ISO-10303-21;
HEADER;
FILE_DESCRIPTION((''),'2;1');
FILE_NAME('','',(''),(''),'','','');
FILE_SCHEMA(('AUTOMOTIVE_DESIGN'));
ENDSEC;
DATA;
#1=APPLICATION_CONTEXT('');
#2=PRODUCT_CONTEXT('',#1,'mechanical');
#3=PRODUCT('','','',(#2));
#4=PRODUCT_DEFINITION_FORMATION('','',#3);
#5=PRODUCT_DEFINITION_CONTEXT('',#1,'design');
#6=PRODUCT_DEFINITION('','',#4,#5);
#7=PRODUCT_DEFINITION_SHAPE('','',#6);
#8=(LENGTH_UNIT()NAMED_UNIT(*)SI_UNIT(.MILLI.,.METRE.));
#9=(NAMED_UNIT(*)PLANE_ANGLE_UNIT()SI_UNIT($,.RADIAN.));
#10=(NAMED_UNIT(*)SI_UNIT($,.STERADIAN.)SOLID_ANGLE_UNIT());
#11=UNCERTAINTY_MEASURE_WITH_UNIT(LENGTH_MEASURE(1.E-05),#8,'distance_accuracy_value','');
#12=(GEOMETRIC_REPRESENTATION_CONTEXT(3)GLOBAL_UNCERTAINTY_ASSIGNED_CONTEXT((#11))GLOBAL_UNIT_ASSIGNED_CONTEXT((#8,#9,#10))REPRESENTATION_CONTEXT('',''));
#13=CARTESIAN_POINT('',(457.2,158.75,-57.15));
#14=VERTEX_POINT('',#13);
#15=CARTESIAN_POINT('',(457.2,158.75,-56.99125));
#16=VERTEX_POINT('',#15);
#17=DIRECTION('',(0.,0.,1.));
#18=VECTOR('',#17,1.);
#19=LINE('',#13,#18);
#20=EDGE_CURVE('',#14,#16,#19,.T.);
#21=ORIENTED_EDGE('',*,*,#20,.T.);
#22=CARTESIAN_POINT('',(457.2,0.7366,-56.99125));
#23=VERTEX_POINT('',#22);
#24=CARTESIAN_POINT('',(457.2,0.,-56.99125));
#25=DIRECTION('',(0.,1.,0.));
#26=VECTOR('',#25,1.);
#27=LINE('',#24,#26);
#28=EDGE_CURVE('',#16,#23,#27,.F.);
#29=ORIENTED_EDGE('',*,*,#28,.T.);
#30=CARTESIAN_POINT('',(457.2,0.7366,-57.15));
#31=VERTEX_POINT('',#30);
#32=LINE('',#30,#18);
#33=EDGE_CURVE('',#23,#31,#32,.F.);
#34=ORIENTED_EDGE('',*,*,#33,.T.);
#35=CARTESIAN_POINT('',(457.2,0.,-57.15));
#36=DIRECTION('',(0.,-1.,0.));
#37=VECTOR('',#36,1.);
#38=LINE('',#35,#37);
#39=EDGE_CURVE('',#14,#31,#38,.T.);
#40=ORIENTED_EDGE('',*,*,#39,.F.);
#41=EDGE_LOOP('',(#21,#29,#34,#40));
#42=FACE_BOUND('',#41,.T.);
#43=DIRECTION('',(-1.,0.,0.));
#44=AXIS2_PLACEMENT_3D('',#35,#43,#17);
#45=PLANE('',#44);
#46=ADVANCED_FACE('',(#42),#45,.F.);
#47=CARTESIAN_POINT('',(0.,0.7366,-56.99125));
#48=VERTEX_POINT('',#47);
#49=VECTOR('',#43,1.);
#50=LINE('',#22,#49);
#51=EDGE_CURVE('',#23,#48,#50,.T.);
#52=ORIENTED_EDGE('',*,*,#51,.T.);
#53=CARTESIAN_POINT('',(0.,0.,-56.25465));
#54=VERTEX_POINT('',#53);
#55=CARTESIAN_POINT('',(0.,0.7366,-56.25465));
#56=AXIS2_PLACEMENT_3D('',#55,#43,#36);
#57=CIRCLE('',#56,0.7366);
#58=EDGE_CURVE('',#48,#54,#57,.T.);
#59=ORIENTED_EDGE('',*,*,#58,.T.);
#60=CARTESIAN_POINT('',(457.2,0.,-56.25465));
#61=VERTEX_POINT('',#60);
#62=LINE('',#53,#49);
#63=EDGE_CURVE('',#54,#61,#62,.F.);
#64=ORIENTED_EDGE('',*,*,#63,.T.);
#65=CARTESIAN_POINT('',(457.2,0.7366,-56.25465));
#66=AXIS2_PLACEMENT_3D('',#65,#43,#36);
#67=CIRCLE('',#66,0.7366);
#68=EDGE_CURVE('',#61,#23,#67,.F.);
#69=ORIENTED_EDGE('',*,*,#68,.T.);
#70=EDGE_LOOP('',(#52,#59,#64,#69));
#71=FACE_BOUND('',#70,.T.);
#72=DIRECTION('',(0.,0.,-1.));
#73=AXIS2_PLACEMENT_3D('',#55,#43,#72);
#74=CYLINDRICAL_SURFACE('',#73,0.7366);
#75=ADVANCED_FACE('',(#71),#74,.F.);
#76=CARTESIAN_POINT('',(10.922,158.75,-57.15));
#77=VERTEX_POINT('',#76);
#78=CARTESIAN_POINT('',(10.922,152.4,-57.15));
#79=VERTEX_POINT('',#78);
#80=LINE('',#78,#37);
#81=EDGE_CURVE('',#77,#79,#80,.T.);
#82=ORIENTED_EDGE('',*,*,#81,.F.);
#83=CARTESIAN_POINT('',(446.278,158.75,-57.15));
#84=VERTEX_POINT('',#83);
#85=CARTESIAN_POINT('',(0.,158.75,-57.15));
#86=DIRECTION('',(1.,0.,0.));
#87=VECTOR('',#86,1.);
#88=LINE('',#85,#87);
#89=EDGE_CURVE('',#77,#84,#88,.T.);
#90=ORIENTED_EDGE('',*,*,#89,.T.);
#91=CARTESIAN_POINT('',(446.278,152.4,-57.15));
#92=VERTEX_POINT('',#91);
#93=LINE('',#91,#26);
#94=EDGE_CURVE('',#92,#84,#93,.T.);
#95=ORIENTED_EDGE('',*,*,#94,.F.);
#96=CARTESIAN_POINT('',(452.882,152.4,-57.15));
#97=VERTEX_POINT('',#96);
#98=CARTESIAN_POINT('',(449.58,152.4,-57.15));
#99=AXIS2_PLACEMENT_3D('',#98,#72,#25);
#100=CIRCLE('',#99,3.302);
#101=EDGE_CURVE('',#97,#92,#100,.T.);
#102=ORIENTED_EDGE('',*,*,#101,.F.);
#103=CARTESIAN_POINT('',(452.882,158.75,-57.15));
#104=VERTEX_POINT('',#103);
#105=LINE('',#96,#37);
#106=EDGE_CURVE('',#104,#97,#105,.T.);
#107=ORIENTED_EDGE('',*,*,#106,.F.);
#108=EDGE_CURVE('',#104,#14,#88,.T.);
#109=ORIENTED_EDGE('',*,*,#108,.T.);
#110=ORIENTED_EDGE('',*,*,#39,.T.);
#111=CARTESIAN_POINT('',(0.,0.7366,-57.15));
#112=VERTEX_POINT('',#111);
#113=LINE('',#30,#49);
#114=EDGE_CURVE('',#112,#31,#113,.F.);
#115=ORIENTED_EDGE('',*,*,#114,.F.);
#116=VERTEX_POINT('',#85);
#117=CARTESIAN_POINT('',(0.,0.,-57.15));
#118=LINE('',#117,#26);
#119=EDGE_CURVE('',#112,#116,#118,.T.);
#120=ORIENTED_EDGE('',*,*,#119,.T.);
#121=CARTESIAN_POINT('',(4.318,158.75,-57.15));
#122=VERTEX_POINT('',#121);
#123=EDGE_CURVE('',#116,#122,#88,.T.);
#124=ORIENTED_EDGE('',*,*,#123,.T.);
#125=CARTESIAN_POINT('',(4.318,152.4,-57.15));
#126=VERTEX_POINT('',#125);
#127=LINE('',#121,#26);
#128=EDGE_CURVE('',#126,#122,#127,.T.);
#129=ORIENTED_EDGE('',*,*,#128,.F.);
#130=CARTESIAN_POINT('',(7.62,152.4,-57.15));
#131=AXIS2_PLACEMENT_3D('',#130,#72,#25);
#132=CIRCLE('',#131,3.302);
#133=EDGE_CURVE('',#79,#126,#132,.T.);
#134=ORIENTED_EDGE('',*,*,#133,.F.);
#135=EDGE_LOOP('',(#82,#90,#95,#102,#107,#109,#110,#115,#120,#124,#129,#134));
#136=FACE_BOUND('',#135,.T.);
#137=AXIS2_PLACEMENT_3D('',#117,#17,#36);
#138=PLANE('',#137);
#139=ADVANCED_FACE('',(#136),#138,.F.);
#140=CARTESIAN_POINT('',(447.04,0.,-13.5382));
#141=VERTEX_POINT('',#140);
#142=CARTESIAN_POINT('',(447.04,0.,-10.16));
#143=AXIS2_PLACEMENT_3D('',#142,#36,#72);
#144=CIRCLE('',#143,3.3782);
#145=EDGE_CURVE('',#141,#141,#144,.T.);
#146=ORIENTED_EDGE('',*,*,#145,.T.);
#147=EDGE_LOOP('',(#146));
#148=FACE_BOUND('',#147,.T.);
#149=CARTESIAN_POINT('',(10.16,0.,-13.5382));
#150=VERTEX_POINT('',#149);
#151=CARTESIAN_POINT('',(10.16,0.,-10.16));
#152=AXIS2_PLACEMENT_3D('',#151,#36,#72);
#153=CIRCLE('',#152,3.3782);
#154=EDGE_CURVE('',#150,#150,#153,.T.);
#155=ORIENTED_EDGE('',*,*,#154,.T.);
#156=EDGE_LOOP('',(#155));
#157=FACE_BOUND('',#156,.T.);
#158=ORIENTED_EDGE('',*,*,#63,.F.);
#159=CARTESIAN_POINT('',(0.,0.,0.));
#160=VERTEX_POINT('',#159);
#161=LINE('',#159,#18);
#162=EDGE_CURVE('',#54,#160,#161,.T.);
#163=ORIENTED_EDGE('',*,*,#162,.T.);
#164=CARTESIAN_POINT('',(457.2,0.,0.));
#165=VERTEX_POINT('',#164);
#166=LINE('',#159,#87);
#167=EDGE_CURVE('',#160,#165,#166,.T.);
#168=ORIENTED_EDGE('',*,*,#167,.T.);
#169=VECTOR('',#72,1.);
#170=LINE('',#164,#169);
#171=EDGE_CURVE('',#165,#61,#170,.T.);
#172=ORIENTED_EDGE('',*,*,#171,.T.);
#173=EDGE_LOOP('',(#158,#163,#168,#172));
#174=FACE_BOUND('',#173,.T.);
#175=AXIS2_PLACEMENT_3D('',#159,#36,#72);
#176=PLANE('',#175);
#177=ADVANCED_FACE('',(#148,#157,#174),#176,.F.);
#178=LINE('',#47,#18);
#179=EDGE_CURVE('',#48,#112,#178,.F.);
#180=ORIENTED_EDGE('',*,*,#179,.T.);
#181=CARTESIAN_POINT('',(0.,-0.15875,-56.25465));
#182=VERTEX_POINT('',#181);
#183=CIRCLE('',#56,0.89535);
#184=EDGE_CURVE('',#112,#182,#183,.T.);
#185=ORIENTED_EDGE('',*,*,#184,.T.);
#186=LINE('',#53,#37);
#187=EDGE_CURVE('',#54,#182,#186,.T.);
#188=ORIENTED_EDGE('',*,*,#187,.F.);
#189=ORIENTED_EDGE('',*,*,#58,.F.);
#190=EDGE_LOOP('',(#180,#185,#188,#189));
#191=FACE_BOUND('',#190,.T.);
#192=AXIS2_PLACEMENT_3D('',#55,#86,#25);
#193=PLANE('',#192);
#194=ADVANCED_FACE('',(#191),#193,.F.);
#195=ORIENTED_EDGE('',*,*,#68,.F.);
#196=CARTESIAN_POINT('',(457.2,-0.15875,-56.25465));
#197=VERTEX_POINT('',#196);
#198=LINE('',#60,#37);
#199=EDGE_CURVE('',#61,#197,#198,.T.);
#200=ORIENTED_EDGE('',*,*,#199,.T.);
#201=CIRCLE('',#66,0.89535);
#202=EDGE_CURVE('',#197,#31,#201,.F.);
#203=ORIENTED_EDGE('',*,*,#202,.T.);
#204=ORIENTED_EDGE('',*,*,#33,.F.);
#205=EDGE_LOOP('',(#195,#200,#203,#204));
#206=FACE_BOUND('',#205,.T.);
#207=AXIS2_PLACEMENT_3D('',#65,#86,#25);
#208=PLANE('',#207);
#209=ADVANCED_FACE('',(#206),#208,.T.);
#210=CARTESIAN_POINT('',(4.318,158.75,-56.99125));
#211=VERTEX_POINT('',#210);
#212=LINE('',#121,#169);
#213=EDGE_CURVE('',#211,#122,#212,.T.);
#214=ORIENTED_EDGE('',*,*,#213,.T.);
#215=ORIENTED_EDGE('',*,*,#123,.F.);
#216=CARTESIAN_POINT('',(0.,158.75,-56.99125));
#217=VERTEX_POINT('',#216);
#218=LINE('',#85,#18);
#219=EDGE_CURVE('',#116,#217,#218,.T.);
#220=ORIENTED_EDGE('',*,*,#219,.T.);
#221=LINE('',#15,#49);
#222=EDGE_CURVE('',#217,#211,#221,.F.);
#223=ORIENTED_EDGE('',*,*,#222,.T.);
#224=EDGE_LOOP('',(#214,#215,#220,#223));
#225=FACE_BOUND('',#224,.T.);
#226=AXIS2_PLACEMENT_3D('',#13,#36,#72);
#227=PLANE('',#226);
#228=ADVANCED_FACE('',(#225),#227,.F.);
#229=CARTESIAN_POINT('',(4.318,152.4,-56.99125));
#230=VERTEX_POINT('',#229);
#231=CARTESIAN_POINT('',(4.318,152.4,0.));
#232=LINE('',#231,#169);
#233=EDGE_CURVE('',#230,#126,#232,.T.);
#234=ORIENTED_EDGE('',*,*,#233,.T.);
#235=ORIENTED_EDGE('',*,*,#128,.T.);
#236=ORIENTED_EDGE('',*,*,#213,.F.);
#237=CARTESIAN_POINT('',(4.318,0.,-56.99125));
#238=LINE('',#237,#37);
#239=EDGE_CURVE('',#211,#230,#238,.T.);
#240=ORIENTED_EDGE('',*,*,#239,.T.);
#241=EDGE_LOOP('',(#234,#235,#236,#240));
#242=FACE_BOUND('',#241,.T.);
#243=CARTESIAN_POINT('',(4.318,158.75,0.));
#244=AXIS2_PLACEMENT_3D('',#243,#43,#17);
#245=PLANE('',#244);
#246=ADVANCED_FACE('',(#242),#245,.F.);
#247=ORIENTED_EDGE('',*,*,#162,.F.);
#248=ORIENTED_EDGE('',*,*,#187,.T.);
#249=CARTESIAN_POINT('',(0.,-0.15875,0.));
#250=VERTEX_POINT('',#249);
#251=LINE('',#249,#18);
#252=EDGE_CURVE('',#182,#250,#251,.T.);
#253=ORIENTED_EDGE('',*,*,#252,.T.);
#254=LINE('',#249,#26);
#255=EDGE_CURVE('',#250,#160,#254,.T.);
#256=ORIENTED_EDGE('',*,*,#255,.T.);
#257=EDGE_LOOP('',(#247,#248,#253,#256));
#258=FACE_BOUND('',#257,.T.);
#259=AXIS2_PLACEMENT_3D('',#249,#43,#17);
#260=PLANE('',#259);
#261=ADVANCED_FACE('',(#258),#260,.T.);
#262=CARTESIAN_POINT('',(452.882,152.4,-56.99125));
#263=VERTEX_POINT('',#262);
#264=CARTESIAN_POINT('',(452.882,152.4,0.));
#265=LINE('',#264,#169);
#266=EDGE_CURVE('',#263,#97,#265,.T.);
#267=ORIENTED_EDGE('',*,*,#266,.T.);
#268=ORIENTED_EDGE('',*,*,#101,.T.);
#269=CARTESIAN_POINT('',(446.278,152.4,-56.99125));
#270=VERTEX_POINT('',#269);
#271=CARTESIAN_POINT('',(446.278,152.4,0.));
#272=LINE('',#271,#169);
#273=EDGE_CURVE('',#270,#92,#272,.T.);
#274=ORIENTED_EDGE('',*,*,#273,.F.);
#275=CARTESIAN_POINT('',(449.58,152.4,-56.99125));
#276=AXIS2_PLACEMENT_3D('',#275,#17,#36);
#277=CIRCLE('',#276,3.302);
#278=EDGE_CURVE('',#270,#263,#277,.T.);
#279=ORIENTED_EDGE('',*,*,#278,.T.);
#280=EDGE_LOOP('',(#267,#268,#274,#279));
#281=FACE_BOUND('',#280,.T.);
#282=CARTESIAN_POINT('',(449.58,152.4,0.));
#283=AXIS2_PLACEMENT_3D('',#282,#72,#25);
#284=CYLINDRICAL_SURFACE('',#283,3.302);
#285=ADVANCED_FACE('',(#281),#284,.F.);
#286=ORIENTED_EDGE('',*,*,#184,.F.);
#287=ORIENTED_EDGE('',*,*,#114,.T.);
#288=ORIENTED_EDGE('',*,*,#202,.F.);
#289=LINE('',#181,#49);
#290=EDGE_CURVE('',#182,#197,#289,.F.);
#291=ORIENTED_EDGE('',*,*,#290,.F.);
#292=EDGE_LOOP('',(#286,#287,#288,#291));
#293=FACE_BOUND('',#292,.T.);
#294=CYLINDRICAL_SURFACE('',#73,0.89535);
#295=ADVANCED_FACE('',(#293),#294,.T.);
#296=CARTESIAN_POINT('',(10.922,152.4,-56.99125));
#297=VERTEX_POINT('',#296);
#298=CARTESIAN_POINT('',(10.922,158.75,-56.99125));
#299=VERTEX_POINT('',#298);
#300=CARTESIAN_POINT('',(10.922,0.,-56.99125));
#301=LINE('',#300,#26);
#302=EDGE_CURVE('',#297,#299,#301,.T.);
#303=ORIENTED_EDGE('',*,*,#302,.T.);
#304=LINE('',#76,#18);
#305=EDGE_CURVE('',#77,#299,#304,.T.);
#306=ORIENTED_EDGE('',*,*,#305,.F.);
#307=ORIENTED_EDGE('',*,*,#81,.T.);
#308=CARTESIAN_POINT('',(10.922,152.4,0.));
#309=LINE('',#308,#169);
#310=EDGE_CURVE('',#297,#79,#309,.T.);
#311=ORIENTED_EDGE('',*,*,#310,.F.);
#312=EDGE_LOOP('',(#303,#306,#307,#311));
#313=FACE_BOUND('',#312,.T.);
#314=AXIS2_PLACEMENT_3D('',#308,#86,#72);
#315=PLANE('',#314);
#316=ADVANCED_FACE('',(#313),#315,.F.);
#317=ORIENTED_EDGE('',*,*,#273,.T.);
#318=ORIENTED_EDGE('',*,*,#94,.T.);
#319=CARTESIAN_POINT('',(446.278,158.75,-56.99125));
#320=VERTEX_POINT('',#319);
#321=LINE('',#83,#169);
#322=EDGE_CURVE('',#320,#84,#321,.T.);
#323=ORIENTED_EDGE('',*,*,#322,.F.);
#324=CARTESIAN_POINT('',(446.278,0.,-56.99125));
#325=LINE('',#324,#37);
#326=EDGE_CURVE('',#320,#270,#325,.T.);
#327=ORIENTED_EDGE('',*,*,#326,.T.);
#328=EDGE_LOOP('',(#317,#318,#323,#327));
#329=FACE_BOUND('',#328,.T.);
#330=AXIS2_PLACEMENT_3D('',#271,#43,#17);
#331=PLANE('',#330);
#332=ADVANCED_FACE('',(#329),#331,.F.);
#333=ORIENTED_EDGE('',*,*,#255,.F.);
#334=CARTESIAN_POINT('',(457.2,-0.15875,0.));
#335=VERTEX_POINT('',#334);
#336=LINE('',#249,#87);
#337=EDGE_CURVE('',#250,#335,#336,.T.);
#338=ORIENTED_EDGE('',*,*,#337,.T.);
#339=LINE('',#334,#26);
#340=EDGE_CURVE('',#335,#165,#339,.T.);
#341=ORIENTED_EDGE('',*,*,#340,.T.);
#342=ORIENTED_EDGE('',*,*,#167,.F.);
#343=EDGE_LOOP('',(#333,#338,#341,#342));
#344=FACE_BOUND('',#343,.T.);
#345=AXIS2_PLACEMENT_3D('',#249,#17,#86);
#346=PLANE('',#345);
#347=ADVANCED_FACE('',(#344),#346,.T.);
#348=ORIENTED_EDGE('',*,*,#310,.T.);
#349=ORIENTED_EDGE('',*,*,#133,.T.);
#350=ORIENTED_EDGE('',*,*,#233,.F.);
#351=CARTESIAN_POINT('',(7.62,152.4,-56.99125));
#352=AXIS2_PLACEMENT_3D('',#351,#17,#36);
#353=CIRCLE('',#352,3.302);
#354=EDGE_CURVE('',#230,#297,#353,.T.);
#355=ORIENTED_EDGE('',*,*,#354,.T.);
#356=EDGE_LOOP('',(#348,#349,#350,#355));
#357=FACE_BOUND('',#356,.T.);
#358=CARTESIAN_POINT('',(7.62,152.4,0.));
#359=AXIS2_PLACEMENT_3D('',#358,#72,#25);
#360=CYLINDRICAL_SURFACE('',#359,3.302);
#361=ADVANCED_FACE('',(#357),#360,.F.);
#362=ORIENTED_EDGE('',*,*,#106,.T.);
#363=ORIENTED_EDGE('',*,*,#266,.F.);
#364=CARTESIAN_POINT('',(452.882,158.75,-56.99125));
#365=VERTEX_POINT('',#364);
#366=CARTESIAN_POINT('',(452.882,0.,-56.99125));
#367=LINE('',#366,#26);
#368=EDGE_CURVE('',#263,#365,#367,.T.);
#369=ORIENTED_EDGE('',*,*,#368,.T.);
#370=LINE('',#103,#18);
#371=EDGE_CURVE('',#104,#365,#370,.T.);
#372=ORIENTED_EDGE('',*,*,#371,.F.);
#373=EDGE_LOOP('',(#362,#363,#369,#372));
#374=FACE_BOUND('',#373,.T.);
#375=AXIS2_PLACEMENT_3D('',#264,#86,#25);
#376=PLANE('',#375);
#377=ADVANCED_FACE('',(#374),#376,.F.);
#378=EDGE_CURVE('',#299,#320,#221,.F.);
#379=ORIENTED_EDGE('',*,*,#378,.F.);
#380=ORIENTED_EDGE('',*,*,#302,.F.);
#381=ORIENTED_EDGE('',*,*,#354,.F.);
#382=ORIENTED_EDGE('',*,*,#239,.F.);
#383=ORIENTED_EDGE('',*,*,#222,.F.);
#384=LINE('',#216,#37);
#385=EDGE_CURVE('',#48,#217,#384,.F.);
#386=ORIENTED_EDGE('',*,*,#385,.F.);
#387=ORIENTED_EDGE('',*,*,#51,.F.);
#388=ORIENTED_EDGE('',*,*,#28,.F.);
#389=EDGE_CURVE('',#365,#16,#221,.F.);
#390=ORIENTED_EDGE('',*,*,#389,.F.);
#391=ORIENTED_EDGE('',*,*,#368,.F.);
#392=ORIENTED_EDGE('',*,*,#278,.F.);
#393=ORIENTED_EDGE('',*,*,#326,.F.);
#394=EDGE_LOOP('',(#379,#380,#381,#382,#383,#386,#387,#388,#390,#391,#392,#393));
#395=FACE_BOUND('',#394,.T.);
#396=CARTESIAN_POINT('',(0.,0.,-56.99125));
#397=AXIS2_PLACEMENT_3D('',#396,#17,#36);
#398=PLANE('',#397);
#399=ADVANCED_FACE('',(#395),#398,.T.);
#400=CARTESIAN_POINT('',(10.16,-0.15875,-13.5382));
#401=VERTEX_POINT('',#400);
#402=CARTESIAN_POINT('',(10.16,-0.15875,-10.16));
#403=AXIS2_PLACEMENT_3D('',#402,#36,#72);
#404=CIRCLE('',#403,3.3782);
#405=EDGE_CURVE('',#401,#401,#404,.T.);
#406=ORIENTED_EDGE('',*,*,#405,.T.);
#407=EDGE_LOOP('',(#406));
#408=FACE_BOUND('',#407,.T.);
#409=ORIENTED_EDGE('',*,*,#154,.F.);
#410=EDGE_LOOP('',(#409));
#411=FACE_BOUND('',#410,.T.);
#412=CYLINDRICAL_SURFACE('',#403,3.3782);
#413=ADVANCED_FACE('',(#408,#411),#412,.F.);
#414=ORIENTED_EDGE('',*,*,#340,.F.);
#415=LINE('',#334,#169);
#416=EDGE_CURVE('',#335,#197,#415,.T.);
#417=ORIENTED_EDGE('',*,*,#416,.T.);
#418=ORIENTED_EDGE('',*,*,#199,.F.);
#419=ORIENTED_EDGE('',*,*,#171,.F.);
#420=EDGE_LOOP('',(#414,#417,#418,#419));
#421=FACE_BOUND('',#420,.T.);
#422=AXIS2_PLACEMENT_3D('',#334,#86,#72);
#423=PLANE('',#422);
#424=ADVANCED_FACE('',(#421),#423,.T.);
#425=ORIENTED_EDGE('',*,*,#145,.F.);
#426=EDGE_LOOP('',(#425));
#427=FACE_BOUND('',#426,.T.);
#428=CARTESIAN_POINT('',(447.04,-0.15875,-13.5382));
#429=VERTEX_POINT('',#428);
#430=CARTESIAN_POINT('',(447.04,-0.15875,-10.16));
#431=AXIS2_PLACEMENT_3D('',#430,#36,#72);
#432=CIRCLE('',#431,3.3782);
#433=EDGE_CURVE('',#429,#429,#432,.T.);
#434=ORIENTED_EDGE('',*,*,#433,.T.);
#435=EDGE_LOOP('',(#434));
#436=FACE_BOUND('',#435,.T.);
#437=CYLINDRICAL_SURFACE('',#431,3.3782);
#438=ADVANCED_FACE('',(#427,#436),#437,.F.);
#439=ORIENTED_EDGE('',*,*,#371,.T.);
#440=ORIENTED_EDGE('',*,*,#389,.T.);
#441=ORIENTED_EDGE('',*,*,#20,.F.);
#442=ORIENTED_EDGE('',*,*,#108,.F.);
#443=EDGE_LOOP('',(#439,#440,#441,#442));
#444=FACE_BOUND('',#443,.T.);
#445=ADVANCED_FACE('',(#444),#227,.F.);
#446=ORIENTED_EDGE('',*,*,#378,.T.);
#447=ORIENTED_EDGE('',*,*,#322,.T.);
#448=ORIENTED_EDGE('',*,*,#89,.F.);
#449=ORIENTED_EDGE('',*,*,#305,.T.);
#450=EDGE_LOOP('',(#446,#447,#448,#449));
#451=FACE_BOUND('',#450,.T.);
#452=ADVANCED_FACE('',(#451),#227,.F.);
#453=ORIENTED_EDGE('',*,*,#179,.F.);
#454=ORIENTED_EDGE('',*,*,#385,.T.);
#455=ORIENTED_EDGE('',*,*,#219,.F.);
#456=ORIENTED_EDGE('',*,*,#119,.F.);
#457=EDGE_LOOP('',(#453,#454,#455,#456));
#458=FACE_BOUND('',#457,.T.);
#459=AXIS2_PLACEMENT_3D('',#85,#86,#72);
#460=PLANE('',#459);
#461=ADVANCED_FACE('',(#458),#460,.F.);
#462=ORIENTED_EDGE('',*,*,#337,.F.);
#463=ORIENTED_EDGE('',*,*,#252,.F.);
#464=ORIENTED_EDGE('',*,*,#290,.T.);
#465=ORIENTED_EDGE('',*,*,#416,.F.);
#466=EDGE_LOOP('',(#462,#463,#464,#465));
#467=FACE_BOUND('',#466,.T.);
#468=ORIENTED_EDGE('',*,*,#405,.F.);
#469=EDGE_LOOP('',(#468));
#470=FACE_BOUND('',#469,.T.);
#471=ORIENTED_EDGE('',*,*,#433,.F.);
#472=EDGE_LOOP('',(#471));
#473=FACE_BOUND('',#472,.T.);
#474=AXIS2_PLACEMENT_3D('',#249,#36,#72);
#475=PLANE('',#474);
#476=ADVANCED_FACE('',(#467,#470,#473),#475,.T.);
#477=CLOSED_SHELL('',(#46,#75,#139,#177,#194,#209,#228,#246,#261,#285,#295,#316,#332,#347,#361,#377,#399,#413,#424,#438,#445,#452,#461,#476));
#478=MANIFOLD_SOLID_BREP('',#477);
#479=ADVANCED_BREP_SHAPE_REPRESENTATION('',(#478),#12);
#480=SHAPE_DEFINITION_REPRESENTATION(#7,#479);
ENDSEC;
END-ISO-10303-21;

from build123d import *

# Parameters (mm, degrees)
SKETCH1_W                    = 457.2
SKETCH1_H                    = 57.15
BASE_FLANGE1_DEPTH           = 0.15875
EDGE_FLANGE1_STRIP_W         = 2.1082
EDGE_FLANGE1_STRIP_H         = 0.15875
EDGE_FLANGE1_STRIP_CUT_DEPTH = 457.2
EDGE_FLANGE1_DEPTH           = 457.2
CUT_EXTRUDE1_DEPTH           = 488.3392299
F_1_4_CLEARANCE_HOLE2_D      = 6.7564
F_1_4_CLEARANCE_HOLE2_DEPTH  = 25.4
F_1_4_CLEARANCE_HOLE2_TIP    = 2.029827343


# Sheet-metal steps are written as plain solids
with BuildPart() as part:
    # Sketch1 → Base-Flange1 (new body)
    with BuildSketch(Plane(origin=(0, 0, 0), x_dir=(1, 0, 0), z_dir=(0, 1, 0))):
        with Locations((228.6, 28.575)):
            Rectangle(SKETCH1_W, SKETCH1_H)
    extrude(amount=-BASE_FLANGE1_DEPTH)

    # Edge-Flange1 strip (across the edge) → Edge-Flange1 strip cut (cut)
    with BuildSketch(Plane(origin=(457.2, 0, -57.15), x_dir=(0, 0, 1), z_dir=(-1, 0, 0))):
        with Locations((-0.15875, -0.079375)):
            Rectangle(EDGE_FLANGE1_STRIP_W, EDGE_FLANGE1_STRIP_H)
    extrude(amount=EDGE_FLANGE1_STRIP_CUT_DEPTH, mode=Mode.SUBTRACT)

    # Edge-Flange1 section (across the edge) → Edge-Flange1 (add)
    with BuildSketch(Plane(origin=(457.2, 0, -57.15), x_dir=(0, 0, 1), z_dir=(-1, 0, 0))):
        with BuildLine():
            Line((0, 0.7366), (0, 158.75))
            Line((0, 158.75), (0.15875, 158.75))
            Line((0.15875, 158.75), (0.15875, 0.7366))
            ThreePointArc((0.15875, 0.7366), (0.374495145, 0.215745145), (0.89535, 0))
            Line((0.89535, 0), (0.89535, -0.15875))
            ThreePointArc((0.89535, -0.15875), (0.262241943, 0.103491943), (0, 0.7366))
        make_face()
    extrude(amount=EDGE_FLANGE1_DEPTH)

    # Sketch9 → Cut-Extrude1 (cut, through all)
    with BuildSketch(Plane(origin=(0, 0, -57.15), x_dir=(-1, 0, 0), z_dir=(0, 0, -1))):
        with BuildLine():
            Line((-446.278, 152.4), (-446.278, 158.75))
            Line((-446.278, 158.75), (-452.882, 158.75))
            Line((-452.882, 158.75), (-452.882, 152.4))
            ThreePointArc((-452.882, 152.4), (-449.58, 149.098), (-446.278, 152.4))
        make_face()
        with BuildLine():
            Line((-10.922, 152.4), (-10.922, 158.75))
            Line((-10.922, 158.75), (-4.318, 158.75))
            Line((-4.318, 158.75), (-4.318, 152.4))
            ThreePointArc((-4.318, 152.4), (-7.62, 149.098), (-10.922, 152.4))
        make_face()
    extrude(amount=-CUT_EXTRUDE1_DEPTH, mode=Mode.SUBTRACT)

    # 1/4 Clearance Hole2
    with Locations(Plane(origin=(10.16, -0.15875, -10.16), x_dir=(0, 0, -1), z_dir=(0, -1, 0))):
        with Locations((0, 0), (0, 436.88)):
            Hole(F_1_4_CLEARANCE_HOLE2_D / 2, depth=F_1_4_CLEARANCE_HOLE2_DEPTH)
            with Locations((0, 0, -(F_1_4_CLEARANCE_HOLE2_DEPTH + F_1_4_CLEARANCE_HOLE2_TIP / 2))):  # 118° drill point
                Cone(0, F_1_4_CLEARANCE_HOLE2_D / 2, F_1_4_CLEARANCE_HOLE2_TIP, mode=Mode.SUBTRACT)


solid = part.part
